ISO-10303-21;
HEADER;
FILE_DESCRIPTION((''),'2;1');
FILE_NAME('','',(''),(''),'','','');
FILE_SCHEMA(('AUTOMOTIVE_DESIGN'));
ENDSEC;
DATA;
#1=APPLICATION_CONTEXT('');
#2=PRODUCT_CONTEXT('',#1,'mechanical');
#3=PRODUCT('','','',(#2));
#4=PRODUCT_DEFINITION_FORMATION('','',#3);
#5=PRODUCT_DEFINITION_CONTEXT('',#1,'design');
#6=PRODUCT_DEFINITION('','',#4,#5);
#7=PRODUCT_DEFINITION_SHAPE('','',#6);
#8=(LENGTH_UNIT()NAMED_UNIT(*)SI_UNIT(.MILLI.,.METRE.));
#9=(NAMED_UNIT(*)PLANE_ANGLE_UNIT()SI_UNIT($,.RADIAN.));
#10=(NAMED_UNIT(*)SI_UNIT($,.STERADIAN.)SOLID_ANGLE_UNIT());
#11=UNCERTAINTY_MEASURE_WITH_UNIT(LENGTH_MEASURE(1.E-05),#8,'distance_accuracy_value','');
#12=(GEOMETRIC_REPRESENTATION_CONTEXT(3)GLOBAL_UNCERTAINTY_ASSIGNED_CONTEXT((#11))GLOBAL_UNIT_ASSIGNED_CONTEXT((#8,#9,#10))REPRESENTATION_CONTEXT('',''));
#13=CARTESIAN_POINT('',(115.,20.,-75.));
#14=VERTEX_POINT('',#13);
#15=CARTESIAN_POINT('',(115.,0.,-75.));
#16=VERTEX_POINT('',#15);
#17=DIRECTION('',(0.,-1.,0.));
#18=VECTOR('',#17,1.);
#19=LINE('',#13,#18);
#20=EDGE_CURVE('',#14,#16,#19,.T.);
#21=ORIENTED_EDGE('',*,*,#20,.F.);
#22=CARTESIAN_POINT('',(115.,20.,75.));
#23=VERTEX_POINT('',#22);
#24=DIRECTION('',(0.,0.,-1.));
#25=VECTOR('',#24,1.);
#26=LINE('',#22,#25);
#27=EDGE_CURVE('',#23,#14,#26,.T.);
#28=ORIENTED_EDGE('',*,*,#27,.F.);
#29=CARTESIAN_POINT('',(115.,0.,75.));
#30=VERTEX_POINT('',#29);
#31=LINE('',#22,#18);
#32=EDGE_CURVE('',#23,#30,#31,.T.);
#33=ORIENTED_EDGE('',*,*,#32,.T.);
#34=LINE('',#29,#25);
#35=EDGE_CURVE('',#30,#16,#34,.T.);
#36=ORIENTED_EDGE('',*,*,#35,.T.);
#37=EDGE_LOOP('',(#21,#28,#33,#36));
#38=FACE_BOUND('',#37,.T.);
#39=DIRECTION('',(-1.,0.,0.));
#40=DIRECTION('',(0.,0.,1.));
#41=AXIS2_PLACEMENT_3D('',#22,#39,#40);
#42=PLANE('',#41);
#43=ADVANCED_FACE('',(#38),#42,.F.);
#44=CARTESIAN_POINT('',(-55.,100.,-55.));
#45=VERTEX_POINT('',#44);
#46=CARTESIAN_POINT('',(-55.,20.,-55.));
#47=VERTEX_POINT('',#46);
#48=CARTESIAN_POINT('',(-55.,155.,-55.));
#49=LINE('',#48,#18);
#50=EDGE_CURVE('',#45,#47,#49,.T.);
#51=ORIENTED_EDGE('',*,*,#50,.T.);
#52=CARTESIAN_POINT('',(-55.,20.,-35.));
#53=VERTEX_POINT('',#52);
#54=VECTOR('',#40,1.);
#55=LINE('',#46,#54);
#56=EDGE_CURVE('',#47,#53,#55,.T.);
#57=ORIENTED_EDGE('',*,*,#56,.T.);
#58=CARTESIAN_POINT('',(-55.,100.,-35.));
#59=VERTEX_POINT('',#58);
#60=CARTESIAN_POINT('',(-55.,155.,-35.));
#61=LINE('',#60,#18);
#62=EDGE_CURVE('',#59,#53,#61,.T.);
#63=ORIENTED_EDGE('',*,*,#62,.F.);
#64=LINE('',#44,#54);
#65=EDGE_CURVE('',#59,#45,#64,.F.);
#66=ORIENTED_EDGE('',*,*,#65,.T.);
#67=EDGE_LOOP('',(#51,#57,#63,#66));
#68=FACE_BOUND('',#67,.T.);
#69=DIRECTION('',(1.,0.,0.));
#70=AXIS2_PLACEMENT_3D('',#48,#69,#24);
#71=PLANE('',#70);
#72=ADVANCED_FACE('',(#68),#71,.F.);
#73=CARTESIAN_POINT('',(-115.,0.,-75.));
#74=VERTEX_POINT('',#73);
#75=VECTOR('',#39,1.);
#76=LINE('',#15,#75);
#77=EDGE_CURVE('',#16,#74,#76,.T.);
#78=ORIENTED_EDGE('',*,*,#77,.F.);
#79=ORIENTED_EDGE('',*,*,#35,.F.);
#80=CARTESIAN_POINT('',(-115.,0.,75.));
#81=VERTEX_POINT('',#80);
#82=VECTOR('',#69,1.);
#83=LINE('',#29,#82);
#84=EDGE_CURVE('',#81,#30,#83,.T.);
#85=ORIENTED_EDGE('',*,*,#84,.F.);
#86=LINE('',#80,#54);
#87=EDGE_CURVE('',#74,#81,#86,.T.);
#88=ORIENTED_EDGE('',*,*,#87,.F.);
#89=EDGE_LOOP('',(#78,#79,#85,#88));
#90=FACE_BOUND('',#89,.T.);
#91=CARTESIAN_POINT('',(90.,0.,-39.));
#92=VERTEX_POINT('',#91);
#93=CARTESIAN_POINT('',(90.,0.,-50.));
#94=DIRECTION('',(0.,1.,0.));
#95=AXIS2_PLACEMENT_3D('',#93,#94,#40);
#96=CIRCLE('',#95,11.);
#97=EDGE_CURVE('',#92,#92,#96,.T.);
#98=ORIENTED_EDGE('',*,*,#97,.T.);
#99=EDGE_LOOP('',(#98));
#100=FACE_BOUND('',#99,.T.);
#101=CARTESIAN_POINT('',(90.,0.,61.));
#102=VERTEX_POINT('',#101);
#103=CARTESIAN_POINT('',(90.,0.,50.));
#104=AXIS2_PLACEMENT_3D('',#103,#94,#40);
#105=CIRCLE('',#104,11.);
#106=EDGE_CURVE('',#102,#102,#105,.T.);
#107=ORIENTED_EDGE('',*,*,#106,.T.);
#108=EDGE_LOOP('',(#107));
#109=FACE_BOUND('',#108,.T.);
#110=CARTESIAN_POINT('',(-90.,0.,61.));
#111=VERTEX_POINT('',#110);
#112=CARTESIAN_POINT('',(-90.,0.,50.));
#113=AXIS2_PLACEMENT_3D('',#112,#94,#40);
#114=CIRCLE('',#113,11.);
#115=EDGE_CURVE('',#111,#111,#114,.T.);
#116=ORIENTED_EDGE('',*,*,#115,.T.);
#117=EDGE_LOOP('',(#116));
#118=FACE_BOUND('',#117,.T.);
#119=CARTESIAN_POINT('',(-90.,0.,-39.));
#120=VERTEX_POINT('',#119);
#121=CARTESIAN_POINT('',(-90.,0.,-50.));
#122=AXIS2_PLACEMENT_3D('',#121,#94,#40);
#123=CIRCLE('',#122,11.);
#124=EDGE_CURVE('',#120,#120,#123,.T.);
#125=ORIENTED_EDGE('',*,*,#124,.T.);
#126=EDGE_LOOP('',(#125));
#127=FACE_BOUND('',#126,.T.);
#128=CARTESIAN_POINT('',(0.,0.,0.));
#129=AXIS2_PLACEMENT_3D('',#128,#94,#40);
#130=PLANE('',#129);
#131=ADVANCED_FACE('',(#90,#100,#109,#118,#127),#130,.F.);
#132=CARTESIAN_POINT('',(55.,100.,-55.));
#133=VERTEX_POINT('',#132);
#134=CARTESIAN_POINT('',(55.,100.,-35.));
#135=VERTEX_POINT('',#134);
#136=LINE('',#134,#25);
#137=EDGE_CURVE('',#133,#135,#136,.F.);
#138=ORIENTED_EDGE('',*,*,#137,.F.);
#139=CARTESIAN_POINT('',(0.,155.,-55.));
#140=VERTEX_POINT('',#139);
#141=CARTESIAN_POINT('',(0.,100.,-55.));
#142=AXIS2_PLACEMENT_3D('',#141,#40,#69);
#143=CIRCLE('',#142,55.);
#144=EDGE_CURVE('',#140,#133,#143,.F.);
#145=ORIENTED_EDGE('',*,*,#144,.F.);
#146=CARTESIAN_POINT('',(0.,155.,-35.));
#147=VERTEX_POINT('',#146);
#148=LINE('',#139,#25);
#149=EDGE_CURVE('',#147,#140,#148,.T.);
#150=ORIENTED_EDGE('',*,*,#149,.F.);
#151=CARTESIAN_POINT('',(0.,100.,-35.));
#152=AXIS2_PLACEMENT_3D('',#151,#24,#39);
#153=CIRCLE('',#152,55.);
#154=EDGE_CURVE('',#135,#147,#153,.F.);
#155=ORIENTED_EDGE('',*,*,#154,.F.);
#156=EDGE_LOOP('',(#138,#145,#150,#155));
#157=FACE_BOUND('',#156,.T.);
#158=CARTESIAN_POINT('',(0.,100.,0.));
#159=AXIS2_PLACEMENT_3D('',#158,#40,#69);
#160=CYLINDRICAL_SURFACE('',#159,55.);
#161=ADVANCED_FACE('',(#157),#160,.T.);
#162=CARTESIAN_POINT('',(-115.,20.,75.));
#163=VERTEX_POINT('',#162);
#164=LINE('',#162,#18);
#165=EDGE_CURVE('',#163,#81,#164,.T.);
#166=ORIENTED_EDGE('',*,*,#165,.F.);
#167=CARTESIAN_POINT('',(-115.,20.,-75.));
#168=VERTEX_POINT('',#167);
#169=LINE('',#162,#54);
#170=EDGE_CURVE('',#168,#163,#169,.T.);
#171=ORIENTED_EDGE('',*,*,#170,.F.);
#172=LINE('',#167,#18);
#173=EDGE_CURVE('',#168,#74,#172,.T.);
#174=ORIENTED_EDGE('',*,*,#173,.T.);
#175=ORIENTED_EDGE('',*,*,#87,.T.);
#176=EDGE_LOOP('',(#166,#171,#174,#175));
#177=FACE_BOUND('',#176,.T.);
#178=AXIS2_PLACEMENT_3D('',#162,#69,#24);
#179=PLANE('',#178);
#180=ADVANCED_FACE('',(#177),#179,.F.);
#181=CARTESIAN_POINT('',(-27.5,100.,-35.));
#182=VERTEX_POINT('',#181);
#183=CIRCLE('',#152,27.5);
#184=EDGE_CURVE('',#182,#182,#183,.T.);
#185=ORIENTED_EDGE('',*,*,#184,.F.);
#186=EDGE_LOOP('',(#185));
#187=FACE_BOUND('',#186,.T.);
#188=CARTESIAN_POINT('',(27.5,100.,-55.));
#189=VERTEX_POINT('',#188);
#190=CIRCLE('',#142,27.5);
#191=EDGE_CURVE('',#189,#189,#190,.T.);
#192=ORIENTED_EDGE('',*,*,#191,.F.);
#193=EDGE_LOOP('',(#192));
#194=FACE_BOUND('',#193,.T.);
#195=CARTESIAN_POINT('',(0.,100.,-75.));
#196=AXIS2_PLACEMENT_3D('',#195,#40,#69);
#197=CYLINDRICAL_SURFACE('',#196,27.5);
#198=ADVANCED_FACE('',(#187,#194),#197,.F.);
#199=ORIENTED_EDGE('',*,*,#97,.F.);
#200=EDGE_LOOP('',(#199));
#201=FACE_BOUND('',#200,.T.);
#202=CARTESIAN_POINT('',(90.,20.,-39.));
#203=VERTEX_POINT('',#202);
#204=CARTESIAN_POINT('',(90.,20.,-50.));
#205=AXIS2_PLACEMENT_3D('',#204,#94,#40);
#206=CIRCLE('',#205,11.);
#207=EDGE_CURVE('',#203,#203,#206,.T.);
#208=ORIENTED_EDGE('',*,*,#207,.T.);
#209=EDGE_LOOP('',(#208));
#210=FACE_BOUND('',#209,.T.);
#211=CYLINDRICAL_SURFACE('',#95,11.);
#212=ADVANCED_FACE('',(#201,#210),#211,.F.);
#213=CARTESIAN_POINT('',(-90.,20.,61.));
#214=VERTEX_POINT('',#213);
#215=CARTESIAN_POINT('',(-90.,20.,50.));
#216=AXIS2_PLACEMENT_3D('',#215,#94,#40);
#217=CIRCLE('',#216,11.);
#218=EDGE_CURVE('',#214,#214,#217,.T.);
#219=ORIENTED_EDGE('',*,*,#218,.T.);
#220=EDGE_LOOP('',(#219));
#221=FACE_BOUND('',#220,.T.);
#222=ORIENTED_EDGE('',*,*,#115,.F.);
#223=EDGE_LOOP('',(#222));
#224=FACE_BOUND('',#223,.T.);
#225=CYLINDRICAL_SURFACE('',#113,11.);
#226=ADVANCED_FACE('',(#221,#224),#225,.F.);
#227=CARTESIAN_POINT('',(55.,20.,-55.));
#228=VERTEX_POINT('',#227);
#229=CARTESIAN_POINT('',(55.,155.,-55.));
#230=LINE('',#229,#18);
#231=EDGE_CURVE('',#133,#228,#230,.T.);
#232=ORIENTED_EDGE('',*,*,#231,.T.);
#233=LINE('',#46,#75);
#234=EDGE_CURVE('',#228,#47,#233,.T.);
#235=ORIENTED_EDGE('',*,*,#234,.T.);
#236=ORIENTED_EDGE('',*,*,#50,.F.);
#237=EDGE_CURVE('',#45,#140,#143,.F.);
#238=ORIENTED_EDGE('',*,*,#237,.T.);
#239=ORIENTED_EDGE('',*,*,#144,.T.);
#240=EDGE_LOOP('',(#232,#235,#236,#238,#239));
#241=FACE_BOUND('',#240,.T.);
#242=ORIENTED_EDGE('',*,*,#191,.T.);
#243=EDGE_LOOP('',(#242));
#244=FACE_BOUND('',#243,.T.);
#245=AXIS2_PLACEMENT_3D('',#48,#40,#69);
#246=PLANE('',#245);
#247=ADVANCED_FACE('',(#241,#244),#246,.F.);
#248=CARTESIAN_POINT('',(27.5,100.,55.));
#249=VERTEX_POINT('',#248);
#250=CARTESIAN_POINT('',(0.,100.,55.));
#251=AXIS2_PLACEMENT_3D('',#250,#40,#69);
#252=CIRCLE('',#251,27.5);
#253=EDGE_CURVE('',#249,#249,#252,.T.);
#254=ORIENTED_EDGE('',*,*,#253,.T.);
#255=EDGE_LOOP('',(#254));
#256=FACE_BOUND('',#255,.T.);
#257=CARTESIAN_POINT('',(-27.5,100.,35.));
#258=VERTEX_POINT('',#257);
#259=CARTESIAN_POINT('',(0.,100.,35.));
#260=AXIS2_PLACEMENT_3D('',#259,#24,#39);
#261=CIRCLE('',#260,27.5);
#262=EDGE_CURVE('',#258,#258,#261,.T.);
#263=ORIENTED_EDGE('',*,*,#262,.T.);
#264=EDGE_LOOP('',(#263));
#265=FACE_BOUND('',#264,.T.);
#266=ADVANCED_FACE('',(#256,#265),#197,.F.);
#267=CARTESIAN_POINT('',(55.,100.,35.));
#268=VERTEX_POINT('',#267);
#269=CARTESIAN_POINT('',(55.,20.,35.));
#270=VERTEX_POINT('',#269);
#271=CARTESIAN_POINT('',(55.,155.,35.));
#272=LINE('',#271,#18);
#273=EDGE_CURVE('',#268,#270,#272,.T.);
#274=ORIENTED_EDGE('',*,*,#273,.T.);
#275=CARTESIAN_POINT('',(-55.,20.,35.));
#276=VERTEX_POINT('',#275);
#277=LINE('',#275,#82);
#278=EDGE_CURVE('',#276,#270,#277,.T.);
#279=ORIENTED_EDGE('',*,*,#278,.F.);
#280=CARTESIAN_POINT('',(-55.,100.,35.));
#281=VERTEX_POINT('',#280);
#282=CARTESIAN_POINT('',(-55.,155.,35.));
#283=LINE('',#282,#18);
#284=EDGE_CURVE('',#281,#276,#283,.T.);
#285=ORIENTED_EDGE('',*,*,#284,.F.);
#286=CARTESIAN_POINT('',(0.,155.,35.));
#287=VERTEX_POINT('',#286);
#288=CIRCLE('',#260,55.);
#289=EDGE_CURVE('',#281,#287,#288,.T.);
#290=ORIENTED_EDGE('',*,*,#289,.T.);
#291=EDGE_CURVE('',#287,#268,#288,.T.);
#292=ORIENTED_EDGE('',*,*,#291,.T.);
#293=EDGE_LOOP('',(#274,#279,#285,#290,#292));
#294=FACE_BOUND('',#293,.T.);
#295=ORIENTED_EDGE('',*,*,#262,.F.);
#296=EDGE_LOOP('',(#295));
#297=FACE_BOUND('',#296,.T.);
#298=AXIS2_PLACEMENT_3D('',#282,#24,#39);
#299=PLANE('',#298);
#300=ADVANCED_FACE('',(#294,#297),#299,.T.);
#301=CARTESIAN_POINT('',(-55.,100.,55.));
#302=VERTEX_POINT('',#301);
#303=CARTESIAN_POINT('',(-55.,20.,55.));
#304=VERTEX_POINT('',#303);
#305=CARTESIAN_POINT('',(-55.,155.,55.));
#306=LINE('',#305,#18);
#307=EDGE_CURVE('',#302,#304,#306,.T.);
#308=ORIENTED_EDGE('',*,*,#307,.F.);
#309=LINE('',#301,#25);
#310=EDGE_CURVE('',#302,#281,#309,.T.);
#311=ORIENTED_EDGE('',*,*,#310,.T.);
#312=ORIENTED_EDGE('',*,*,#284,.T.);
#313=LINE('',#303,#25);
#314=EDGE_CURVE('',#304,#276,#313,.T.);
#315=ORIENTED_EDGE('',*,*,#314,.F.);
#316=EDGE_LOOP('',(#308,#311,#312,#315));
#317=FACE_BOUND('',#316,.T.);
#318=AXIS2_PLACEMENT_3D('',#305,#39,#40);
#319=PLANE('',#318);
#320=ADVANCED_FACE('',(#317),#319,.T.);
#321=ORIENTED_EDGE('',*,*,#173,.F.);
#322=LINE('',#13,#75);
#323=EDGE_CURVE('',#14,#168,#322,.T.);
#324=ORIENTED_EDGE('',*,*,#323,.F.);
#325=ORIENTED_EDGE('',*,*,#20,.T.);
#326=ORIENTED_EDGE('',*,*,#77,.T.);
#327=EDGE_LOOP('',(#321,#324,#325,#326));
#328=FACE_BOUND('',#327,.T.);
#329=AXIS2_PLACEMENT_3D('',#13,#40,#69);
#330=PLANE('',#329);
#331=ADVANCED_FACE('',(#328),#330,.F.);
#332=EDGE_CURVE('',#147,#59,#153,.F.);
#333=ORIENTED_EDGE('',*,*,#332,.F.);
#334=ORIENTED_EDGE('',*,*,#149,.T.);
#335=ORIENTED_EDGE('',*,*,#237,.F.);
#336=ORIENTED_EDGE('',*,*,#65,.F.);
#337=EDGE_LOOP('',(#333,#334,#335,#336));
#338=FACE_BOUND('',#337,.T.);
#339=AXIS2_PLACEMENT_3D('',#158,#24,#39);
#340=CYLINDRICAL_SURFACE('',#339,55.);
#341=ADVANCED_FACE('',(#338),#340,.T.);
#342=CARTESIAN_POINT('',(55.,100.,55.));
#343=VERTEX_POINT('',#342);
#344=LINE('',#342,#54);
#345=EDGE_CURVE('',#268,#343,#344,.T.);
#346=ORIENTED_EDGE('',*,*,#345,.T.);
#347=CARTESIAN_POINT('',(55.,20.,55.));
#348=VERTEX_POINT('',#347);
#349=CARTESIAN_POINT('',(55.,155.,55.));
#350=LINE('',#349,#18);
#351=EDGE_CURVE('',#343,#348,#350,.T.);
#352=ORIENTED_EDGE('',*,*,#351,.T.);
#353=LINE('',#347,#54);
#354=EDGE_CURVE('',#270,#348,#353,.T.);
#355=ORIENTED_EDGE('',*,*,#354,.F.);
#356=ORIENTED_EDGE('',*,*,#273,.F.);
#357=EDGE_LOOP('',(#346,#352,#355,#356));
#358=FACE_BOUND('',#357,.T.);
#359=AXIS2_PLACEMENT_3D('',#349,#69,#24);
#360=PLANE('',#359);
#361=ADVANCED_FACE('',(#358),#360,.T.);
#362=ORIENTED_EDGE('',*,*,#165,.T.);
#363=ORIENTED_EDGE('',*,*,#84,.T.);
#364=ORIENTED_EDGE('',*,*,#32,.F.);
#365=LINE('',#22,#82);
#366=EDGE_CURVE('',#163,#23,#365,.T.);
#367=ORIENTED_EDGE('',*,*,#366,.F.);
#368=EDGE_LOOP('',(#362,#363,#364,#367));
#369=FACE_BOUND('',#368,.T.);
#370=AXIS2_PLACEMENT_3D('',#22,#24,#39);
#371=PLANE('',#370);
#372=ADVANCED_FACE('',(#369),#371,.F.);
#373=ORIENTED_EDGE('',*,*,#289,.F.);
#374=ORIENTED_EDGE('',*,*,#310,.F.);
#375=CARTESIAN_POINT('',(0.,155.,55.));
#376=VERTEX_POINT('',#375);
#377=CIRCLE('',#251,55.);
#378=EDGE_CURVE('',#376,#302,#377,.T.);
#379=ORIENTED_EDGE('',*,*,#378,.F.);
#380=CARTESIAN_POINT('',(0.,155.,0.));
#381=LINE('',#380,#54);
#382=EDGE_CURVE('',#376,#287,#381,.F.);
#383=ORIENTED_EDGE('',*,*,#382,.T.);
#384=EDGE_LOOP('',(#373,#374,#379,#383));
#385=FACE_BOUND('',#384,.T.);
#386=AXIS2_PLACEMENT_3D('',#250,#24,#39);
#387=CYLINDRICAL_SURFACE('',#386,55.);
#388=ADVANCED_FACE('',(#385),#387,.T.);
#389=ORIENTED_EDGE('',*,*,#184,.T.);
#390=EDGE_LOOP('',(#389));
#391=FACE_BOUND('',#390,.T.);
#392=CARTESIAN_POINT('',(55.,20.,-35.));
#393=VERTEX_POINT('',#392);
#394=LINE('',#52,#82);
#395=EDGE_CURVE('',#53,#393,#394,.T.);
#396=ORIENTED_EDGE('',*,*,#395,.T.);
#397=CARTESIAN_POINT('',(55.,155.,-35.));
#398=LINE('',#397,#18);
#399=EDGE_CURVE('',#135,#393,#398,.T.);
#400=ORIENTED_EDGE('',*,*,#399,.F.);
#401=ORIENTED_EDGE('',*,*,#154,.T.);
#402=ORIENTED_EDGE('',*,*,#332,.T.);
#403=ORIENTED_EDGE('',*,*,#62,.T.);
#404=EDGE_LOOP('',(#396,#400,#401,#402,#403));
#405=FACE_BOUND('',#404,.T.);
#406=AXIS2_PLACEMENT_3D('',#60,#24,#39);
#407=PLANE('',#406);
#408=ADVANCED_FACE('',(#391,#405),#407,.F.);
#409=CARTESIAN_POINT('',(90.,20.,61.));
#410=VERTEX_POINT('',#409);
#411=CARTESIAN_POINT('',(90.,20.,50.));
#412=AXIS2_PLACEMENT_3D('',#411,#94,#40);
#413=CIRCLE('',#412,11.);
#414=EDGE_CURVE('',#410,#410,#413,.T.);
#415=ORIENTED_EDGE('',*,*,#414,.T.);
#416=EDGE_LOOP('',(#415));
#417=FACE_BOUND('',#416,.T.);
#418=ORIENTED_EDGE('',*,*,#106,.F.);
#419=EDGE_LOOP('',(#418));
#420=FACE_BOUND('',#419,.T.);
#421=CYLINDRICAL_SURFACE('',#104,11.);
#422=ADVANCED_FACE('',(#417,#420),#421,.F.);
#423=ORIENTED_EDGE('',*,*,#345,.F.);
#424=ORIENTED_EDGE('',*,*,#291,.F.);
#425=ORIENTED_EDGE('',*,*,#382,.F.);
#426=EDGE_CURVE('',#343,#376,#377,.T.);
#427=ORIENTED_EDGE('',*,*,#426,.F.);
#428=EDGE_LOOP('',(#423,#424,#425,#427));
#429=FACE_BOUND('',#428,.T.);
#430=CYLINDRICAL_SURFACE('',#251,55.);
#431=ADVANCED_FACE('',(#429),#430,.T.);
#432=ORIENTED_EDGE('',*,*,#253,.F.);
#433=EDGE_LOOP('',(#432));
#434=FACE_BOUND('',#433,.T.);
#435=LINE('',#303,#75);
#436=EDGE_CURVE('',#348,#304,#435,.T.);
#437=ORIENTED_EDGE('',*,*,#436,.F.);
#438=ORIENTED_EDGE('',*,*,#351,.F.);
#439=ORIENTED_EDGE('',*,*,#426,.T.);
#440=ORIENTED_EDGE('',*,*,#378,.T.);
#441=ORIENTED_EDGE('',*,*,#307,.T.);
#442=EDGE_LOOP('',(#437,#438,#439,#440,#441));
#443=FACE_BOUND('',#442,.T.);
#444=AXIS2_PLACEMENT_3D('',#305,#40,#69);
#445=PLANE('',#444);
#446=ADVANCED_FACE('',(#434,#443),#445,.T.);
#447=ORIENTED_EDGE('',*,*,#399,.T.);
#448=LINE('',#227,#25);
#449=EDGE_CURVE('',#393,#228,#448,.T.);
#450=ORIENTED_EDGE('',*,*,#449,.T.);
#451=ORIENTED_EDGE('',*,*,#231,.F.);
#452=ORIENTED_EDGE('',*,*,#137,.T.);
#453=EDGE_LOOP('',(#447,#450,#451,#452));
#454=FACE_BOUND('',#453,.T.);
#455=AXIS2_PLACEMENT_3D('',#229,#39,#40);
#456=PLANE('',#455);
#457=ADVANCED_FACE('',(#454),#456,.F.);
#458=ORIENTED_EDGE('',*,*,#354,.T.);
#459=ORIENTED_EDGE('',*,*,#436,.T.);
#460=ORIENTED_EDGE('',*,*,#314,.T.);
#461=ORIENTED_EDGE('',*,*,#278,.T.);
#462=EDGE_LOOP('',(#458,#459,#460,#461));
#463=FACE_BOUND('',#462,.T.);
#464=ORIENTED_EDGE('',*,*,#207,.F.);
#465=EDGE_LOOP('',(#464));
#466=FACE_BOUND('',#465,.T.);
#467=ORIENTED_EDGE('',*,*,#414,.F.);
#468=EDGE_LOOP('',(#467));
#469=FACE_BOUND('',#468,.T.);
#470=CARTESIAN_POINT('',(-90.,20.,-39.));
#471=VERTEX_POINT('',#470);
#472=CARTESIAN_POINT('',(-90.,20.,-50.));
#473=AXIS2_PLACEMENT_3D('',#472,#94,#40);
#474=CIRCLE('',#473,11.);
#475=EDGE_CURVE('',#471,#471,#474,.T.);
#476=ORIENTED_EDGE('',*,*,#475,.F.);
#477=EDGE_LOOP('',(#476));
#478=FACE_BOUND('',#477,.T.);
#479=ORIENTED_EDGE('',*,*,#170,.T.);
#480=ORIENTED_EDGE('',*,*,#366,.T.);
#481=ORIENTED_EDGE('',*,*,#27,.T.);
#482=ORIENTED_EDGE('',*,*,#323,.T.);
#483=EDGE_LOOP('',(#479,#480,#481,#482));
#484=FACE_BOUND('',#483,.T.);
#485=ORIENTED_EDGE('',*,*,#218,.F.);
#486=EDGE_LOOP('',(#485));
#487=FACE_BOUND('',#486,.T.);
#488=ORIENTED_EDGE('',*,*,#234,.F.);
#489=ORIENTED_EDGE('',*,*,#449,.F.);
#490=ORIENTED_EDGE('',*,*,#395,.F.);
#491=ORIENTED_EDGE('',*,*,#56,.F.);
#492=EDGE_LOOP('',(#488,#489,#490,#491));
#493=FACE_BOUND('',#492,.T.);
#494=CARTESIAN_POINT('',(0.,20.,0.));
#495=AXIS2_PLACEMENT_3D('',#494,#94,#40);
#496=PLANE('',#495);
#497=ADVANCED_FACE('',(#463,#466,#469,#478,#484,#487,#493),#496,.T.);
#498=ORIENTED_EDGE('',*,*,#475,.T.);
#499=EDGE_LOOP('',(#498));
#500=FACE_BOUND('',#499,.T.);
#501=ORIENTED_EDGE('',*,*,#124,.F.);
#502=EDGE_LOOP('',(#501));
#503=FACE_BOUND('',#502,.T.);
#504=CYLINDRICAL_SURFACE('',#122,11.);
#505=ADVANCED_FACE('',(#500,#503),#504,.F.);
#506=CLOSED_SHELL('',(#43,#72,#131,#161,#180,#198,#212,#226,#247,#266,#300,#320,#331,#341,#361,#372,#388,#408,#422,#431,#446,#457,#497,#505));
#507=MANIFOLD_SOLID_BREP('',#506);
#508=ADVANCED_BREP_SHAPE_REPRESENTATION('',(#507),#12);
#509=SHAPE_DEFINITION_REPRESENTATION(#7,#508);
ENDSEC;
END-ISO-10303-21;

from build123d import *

# Parameters (mm, degrees)
SKETCH_1_W                  = 230
SKETCH_1_H                  = 150
EXTRUDE_1_DEPTH             = 20
SKETCH_2_W                  = 110
SKETCH_2_H                  = 20
EXTRUDE_2_DEPTH             = 135
FILLET_1_R                  = 55
SKETCH_4_R                  = 27.5
CUT_EXTRUDE_1_DEPTH         = 233.701525564
SKETCH_5_R                  = 11
CUT_EXTRUDE_2_DEPTH         = 193.54869514
PATTERN_LINEAR_1_COUNT      = 2
PATTERN_LINEAR_1_PITCH      = 180
PATTERN_LINEAR_1_COUNT_DIR2 = 2
PATTERN_LINEAR_1_PITCH_DIR2 = 100


with BuildPart() as part:
    # 草图1 → 凸台-拉伸1 (new body)
    with BuildSketch(Plane(origin=(0, 0, 0), x_dir=(1, 0, 0), z_dir=(0, 1, 0))):
        Rectangle(SKETCH_1_W, SKETCH_1_H)
    extrude(amount=EXTRUDE_1_DEPTH)

    # 草图2 → 凸台-拉伸2 (add)
    with BuildSketch(Plane(origin=(0, 20, 0), x_dir=(1, 0, 0), z_dir=(0, 1, 0))):
        with Locations((0, 45)):
            Rectangle(SKETCH_2_W, SKETCH_2_H)
    extrude_2 = extrude(amount=EXTRUDE_2_DEPTH)

    # 镜向1: 凸台-拉伸2 across plane
    add(extrude_2.mirror(Plane.XY))

    # 圆角1
    fillet_1_edges = [part.edges().sort_by_distance(p)[0] for p in [
        (-55, 155, -45),
        (55, 155, -45),
        (-55, 155, 45),
        (55, 155, 45),
    ]]
    fillet(fillet_1_edges, radius=FILLET_1_R - 0.0001)  # a hair under: the kernel refuses the full size

    # 草图4 → 切除-拉伸1 (cut, through all)
    with BuildSketch(Plane.XY.offset(55)):
        with Locations((0, 100)):
            Circle(SKETCH_4_R)
    extrude(amount=-CUT_EXTRUDE_1_DEPTH, mode=Mode.SUBTRACT)

    # 草图5 → 切除-拉伸2 (cut, through all)
    with BuildSketch(Plane(origin=(0, 20, 0), x_dir=(1, 0, 0), z_dir=(0, 1, 0))):
        with Locations(Location((-90, 50, 0), (0, 0, 270))):
            Circle(SKETCH_5_R)
    cut_extrude_2 = extrude(amount=-CUT_EXTRUDE_2_DEPTH, mode=Mode.SUBTRACT)

    # 阵列(线性)1: Cut-Extrude 2 2 × 2
    with Locations(*[(i * PATTERN_LINEAR_1_PITCH, 0, j * PATTERN_LINEAR_1_PITCH_DIR2) for i in range(PATTERN_LINEAR_1_COUNT) for j in range(PATTERN_LINEAR_1_COUNT_DIR2) if (i, j) != (0, 0)]):
        add(cut_extrude_2, mode=Mode.SUBTRACT)


solid = part.part
